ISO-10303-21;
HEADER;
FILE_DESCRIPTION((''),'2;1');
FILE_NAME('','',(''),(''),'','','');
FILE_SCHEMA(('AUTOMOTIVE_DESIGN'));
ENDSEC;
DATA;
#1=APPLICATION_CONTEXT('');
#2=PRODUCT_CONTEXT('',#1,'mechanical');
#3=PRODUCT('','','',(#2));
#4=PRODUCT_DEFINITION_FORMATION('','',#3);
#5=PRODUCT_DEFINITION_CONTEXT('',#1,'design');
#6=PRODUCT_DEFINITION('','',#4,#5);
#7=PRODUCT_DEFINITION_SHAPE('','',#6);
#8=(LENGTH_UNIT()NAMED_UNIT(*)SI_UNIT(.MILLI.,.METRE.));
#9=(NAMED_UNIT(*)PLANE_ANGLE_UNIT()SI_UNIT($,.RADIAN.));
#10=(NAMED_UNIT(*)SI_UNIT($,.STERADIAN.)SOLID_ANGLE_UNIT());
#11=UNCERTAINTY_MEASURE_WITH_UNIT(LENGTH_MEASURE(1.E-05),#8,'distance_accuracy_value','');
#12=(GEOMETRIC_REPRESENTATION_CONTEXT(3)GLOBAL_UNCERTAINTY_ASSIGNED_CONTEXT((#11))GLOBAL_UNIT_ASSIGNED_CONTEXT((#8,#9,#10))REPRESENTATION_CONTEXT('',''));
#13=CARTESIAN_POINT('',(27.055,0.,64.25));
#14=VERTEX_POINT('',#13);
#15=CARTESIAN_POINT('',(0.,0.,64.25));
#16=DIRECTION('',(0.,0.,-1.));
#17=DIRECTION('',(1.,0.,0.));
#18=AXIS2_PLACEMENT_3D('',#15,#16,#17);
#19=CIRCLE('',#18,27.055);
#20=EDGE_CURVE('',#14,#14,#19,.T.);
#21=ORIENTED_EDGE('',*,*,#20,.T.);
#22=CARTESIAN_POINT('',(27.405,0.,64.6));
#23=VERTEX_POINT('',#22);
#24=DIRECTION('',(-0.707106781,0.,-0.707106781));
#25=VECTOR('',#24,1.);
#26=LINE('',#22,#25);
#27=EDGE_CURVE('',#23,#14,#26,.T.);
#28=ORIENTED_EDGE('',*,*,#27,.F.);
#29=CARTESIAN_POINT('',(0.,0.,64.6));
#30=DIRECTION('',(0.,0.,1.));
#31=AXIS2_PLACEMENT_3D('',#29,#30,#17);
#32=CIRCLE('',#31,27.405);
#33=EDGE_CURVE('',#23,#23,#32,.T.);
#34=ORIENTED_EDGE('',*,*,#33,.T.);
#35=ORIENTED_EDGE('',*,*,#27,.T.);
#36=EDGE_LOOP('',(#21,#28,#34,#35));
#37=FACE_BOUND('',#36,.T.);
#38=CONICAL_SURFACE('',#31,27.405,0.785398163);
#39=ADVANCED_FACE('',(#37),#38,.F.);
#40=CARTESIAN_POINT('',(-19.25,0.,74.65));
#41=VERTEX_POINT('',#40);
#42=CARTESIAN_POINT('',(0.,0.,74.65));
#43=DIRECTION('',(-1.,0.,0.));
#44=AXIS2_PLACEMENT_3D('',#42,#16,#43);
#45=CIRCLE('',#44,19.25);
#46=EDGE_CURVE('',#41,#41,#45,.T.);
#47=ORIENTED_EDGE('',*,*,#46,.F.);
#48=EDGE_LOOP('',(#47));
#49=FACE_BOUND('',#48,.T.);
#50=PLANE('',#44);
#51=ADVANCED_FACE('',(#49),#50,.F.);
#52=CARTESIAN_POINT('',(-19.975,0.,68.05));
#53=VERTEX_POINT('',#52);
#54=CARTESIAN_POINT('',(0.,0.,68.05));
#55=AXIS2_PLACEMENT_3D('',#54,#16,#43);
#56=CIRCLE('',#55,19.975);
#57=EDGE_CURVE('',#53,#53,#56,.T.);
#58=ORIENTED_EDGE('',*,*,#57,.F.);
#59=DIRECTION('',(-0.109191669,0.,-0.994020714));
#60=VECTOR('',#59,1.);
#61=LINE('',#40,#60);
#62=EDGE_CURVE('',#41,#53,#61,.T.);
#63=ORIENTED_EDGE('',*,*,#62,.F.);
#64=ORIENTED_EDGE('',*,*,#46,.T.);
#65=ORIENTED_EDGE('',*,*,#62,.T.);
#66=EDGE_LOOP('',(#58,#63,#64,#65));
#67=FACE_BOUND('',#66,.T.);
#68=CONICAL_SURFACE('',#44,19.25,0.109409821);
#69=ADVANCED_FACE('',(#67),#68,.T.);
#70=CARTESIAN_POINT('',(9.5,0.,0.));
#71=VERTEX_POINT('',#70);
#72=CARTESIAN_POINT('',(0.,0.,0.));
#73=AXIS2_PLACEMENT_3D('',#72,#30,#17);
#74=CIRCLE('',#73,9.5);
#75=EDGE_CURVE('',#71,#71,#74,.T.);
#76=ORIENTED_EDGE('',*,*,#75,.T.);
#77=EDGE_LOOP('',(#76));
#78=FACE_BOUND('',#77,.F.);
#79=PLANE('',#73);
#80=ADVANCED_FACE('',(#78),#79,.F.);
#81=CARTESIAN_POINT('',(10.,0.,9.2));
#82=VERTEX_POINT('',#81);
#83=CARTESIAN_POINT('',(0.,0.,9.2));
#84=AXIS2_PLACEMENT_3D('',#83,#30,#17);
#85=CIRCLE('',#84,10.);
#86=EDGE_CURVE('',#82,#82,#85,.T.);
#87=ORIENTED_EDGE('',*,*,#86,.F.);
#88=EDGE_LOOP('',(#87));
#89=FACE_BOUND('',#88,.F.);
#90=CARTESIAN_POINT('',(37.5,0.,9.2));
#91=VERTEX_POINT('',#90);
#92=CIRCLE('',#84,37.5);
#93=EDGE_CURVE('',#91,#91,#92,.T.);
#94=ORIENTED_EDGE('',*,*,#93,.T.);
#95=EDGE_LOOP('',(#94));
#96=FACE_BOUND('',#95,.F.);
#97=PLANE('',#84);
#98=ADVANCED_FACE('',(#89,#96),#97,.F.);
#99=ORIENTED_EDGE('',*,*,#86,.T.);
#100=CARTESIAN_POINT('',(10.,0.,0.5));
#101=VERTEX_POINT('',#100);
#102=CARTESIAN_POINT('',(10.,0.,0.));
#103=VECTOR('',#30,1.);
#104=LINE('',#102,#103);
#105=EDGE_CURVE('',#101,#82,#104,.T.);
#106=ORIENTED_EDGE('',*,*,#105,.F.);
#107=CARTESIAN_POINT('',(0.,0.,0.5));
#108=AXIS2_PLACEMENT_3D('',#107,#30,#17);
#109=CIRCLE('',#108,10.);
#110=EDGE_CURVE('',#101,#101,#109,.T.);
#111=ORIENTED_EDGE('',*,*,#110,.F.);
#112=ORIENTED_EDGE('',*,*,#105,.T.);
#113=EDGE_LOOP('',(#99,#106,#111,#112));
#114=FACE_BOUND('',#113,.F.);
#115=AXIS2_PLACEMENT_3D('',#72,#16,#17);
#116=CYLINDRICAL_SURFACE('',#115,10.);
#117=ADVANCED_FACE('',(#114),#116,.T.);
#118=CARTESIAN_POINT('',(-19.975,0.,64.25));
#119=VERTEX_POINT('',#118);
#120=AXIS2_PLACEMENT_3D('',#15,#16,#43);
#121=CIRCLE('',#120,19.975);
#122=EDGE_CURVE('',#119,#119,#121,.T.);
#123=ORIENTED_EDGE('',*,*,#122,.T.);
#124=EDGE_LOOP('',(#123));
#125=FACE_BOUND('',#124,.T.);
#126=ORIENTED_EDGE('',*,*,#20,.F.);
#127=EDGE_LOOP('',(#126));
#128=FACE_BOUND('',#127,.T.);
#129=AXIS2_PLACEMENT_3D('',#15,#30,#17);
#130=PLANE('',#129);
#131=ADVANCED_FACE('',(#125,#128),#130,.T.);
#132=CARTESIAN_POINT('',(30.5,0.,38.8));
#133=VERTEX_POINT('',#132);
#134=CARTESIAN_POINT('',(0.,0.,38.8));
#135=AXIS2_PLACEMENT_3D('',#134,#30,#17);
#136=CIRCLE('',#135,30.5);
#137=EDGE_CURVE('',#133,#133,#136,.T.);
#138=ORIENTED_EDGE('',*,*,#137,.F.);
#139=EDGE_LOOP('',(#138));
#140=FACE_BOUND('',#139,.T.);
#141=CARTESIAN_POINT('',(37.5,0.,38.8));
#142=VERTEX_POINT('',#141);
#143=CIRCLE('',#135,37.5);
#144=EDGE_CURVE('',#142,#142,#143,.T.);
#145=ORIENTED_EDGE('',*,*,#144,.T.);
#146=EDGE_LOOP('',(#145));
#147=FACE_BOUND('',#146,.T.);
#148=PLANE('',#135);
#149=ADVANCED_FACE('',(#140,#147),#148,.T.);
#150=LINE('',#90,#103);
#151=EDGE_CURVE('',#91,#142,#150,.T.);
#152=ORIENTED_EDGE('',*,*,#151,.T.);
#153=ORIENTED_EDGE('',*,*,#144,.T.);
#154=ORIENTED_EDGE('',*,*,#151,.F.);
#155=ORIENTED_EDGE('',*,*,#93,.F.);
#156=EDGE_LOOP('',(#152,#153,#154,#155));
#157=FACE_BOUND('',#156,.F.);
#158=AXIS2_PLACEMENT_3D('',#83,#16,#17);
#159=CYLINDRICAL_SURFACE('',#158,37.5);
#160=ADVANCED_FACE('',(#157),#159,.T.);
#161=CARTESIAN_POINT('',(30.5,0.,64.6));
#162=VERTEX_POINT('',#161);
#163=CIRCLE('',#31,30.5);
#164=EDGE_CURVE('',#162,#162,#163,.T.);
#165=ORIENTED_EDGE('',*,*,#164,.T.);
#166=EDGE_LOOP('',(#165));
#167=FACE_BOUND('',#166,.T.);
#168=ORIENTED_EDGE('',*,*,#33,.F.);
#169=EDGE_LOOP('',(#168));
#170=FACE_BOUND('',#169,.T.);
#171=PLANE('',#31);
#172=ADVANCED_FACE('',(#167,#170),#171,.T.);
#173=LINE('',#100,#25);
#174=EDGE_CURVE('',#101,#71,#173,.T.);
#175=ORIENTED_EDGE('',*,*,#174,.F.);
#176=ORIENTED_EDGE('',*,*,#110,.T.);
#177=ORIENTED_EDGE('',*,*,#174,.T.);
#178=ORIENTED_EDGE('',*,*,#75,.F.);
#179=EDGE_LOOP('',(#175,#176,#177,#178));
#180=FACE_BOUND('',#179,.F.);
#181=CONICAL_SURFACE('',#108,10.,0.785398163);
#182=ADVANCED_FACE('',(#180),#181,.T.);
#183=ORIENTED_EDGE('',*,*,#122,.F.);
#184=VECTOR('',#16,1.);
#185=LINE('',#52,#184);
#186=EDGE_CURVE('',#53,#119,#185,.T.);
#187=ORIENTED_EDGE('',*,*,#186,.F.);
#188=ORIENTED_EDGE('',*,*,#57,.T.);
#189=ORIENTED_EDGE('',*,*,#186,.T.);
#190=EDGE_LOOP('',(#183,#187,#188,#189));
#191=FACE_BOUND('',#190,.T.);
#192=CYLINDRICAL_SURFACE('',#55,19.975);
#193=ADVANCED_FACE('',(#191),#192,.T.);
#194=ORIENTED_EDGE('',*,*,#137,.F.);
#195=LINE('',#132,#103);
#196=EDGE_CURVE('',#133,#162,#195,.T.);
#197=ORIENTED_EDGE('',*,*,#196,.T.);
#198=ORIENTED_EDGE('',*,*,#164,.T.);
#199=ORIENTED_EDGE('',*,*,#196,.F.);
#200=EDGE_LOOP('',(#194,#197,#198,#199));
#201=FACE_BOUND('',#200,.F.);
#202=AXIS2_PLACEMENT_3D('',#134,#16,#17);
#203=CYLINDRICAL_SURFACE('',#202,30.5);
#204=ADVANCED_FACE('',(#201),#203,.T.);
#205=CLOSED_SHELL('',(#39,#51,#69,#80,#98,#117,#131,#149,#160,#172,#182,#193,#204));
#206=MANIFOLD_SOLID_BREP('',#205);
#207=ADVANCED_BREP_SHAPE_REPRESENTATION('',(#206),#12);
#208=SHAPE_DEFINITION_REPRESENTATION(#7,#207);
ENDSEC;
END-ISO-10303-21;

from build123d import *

# Parameters (mm, degrees)
F1_R     = 10
F2_DEPTH = 9.2
F3_R     = 37.5
F4_DEPTH = 29.6
F5_R     = 30.5
F6_DEPTH = 25.8
F7_R     = 26.905
F8_DEPTH = 0.35


# Not quite as in the source:
# - a fillet or chamfer that OpenCascade refuses, or shapes differently, is made with other operations: its cross-section is extruded or revolved along the edge and cut away or added


with BuildPart() as f2:
    # F1 (on Top) → F2 (new body)
    with BuildSketch(Plane.XY):
        Circle(F1_R)
    extrude(amount=F2_DEPTH)

    # F3 (on face) → F4 (join)
    with BuildSketch(Plane.XY.offset(9.2)):
        Circle(F3_R)
    extrude(amount=F4_DEPTH)

    # F5 (on face) → F6 (join)
    with BuildSketch(Plane.XY.offset(38.8)):
        Circle(F5_R)
    extrude(amount=F6_DEPTH)

    # F7 (on face) → F8 (cut)
    with BuildSketch(Plane.XY.offset(64.6)):
        Circle(F7_R)
    extrude(amount=-F8_DEPTH, mode=Mode.SUBTRACT)

    # F10: chamfer of 0.5 on 2 edges, made by hand


with BuildPart() as f10_tool2:
    # F10_s3 → F10_t4 (revolve)
    with BuildSketch(Plane.XZ):
        Polygon((27.405, 64.6), (26.905, 64.1), (26.905, 64.6), align=None)
    revolve(axis=Axis((0, 0, 64.6), (0, 0, 1)))

    split(bisect_by=Plane.XY.offset(64.25), keep=Keep.TOP)


with BuildPart() as f2_1:
    add(f2.part)

    # F10_t1: cut F10_tool2
    add(f10_tool2.part, mode=Mode.SUBTRACT)

    # F10_s6 → F10_t7 (revolve, cut)
    with BuildSketch(Plane.XZ):
        Polygon((10, 0.5), (9.5, 0), (10, 0), align=None)
    revolve(axis=Axis((0, 0, 0), (0, 0, 1)), mode=Mode.SUBTRACT)

    # F11 (on Front) → F12 (revolve)
    with BuildSketch(Plane.XZ):
        Polygon((0, 64.25), (0, 74.65), (-19.25, 74.65), (-19.975, 68.05), (-19.975, 64.25), align=None)
    revolve(axis=Axis((0, 0, 44.8884957004), (0, 0, -1)))


solid = f2_1.part
